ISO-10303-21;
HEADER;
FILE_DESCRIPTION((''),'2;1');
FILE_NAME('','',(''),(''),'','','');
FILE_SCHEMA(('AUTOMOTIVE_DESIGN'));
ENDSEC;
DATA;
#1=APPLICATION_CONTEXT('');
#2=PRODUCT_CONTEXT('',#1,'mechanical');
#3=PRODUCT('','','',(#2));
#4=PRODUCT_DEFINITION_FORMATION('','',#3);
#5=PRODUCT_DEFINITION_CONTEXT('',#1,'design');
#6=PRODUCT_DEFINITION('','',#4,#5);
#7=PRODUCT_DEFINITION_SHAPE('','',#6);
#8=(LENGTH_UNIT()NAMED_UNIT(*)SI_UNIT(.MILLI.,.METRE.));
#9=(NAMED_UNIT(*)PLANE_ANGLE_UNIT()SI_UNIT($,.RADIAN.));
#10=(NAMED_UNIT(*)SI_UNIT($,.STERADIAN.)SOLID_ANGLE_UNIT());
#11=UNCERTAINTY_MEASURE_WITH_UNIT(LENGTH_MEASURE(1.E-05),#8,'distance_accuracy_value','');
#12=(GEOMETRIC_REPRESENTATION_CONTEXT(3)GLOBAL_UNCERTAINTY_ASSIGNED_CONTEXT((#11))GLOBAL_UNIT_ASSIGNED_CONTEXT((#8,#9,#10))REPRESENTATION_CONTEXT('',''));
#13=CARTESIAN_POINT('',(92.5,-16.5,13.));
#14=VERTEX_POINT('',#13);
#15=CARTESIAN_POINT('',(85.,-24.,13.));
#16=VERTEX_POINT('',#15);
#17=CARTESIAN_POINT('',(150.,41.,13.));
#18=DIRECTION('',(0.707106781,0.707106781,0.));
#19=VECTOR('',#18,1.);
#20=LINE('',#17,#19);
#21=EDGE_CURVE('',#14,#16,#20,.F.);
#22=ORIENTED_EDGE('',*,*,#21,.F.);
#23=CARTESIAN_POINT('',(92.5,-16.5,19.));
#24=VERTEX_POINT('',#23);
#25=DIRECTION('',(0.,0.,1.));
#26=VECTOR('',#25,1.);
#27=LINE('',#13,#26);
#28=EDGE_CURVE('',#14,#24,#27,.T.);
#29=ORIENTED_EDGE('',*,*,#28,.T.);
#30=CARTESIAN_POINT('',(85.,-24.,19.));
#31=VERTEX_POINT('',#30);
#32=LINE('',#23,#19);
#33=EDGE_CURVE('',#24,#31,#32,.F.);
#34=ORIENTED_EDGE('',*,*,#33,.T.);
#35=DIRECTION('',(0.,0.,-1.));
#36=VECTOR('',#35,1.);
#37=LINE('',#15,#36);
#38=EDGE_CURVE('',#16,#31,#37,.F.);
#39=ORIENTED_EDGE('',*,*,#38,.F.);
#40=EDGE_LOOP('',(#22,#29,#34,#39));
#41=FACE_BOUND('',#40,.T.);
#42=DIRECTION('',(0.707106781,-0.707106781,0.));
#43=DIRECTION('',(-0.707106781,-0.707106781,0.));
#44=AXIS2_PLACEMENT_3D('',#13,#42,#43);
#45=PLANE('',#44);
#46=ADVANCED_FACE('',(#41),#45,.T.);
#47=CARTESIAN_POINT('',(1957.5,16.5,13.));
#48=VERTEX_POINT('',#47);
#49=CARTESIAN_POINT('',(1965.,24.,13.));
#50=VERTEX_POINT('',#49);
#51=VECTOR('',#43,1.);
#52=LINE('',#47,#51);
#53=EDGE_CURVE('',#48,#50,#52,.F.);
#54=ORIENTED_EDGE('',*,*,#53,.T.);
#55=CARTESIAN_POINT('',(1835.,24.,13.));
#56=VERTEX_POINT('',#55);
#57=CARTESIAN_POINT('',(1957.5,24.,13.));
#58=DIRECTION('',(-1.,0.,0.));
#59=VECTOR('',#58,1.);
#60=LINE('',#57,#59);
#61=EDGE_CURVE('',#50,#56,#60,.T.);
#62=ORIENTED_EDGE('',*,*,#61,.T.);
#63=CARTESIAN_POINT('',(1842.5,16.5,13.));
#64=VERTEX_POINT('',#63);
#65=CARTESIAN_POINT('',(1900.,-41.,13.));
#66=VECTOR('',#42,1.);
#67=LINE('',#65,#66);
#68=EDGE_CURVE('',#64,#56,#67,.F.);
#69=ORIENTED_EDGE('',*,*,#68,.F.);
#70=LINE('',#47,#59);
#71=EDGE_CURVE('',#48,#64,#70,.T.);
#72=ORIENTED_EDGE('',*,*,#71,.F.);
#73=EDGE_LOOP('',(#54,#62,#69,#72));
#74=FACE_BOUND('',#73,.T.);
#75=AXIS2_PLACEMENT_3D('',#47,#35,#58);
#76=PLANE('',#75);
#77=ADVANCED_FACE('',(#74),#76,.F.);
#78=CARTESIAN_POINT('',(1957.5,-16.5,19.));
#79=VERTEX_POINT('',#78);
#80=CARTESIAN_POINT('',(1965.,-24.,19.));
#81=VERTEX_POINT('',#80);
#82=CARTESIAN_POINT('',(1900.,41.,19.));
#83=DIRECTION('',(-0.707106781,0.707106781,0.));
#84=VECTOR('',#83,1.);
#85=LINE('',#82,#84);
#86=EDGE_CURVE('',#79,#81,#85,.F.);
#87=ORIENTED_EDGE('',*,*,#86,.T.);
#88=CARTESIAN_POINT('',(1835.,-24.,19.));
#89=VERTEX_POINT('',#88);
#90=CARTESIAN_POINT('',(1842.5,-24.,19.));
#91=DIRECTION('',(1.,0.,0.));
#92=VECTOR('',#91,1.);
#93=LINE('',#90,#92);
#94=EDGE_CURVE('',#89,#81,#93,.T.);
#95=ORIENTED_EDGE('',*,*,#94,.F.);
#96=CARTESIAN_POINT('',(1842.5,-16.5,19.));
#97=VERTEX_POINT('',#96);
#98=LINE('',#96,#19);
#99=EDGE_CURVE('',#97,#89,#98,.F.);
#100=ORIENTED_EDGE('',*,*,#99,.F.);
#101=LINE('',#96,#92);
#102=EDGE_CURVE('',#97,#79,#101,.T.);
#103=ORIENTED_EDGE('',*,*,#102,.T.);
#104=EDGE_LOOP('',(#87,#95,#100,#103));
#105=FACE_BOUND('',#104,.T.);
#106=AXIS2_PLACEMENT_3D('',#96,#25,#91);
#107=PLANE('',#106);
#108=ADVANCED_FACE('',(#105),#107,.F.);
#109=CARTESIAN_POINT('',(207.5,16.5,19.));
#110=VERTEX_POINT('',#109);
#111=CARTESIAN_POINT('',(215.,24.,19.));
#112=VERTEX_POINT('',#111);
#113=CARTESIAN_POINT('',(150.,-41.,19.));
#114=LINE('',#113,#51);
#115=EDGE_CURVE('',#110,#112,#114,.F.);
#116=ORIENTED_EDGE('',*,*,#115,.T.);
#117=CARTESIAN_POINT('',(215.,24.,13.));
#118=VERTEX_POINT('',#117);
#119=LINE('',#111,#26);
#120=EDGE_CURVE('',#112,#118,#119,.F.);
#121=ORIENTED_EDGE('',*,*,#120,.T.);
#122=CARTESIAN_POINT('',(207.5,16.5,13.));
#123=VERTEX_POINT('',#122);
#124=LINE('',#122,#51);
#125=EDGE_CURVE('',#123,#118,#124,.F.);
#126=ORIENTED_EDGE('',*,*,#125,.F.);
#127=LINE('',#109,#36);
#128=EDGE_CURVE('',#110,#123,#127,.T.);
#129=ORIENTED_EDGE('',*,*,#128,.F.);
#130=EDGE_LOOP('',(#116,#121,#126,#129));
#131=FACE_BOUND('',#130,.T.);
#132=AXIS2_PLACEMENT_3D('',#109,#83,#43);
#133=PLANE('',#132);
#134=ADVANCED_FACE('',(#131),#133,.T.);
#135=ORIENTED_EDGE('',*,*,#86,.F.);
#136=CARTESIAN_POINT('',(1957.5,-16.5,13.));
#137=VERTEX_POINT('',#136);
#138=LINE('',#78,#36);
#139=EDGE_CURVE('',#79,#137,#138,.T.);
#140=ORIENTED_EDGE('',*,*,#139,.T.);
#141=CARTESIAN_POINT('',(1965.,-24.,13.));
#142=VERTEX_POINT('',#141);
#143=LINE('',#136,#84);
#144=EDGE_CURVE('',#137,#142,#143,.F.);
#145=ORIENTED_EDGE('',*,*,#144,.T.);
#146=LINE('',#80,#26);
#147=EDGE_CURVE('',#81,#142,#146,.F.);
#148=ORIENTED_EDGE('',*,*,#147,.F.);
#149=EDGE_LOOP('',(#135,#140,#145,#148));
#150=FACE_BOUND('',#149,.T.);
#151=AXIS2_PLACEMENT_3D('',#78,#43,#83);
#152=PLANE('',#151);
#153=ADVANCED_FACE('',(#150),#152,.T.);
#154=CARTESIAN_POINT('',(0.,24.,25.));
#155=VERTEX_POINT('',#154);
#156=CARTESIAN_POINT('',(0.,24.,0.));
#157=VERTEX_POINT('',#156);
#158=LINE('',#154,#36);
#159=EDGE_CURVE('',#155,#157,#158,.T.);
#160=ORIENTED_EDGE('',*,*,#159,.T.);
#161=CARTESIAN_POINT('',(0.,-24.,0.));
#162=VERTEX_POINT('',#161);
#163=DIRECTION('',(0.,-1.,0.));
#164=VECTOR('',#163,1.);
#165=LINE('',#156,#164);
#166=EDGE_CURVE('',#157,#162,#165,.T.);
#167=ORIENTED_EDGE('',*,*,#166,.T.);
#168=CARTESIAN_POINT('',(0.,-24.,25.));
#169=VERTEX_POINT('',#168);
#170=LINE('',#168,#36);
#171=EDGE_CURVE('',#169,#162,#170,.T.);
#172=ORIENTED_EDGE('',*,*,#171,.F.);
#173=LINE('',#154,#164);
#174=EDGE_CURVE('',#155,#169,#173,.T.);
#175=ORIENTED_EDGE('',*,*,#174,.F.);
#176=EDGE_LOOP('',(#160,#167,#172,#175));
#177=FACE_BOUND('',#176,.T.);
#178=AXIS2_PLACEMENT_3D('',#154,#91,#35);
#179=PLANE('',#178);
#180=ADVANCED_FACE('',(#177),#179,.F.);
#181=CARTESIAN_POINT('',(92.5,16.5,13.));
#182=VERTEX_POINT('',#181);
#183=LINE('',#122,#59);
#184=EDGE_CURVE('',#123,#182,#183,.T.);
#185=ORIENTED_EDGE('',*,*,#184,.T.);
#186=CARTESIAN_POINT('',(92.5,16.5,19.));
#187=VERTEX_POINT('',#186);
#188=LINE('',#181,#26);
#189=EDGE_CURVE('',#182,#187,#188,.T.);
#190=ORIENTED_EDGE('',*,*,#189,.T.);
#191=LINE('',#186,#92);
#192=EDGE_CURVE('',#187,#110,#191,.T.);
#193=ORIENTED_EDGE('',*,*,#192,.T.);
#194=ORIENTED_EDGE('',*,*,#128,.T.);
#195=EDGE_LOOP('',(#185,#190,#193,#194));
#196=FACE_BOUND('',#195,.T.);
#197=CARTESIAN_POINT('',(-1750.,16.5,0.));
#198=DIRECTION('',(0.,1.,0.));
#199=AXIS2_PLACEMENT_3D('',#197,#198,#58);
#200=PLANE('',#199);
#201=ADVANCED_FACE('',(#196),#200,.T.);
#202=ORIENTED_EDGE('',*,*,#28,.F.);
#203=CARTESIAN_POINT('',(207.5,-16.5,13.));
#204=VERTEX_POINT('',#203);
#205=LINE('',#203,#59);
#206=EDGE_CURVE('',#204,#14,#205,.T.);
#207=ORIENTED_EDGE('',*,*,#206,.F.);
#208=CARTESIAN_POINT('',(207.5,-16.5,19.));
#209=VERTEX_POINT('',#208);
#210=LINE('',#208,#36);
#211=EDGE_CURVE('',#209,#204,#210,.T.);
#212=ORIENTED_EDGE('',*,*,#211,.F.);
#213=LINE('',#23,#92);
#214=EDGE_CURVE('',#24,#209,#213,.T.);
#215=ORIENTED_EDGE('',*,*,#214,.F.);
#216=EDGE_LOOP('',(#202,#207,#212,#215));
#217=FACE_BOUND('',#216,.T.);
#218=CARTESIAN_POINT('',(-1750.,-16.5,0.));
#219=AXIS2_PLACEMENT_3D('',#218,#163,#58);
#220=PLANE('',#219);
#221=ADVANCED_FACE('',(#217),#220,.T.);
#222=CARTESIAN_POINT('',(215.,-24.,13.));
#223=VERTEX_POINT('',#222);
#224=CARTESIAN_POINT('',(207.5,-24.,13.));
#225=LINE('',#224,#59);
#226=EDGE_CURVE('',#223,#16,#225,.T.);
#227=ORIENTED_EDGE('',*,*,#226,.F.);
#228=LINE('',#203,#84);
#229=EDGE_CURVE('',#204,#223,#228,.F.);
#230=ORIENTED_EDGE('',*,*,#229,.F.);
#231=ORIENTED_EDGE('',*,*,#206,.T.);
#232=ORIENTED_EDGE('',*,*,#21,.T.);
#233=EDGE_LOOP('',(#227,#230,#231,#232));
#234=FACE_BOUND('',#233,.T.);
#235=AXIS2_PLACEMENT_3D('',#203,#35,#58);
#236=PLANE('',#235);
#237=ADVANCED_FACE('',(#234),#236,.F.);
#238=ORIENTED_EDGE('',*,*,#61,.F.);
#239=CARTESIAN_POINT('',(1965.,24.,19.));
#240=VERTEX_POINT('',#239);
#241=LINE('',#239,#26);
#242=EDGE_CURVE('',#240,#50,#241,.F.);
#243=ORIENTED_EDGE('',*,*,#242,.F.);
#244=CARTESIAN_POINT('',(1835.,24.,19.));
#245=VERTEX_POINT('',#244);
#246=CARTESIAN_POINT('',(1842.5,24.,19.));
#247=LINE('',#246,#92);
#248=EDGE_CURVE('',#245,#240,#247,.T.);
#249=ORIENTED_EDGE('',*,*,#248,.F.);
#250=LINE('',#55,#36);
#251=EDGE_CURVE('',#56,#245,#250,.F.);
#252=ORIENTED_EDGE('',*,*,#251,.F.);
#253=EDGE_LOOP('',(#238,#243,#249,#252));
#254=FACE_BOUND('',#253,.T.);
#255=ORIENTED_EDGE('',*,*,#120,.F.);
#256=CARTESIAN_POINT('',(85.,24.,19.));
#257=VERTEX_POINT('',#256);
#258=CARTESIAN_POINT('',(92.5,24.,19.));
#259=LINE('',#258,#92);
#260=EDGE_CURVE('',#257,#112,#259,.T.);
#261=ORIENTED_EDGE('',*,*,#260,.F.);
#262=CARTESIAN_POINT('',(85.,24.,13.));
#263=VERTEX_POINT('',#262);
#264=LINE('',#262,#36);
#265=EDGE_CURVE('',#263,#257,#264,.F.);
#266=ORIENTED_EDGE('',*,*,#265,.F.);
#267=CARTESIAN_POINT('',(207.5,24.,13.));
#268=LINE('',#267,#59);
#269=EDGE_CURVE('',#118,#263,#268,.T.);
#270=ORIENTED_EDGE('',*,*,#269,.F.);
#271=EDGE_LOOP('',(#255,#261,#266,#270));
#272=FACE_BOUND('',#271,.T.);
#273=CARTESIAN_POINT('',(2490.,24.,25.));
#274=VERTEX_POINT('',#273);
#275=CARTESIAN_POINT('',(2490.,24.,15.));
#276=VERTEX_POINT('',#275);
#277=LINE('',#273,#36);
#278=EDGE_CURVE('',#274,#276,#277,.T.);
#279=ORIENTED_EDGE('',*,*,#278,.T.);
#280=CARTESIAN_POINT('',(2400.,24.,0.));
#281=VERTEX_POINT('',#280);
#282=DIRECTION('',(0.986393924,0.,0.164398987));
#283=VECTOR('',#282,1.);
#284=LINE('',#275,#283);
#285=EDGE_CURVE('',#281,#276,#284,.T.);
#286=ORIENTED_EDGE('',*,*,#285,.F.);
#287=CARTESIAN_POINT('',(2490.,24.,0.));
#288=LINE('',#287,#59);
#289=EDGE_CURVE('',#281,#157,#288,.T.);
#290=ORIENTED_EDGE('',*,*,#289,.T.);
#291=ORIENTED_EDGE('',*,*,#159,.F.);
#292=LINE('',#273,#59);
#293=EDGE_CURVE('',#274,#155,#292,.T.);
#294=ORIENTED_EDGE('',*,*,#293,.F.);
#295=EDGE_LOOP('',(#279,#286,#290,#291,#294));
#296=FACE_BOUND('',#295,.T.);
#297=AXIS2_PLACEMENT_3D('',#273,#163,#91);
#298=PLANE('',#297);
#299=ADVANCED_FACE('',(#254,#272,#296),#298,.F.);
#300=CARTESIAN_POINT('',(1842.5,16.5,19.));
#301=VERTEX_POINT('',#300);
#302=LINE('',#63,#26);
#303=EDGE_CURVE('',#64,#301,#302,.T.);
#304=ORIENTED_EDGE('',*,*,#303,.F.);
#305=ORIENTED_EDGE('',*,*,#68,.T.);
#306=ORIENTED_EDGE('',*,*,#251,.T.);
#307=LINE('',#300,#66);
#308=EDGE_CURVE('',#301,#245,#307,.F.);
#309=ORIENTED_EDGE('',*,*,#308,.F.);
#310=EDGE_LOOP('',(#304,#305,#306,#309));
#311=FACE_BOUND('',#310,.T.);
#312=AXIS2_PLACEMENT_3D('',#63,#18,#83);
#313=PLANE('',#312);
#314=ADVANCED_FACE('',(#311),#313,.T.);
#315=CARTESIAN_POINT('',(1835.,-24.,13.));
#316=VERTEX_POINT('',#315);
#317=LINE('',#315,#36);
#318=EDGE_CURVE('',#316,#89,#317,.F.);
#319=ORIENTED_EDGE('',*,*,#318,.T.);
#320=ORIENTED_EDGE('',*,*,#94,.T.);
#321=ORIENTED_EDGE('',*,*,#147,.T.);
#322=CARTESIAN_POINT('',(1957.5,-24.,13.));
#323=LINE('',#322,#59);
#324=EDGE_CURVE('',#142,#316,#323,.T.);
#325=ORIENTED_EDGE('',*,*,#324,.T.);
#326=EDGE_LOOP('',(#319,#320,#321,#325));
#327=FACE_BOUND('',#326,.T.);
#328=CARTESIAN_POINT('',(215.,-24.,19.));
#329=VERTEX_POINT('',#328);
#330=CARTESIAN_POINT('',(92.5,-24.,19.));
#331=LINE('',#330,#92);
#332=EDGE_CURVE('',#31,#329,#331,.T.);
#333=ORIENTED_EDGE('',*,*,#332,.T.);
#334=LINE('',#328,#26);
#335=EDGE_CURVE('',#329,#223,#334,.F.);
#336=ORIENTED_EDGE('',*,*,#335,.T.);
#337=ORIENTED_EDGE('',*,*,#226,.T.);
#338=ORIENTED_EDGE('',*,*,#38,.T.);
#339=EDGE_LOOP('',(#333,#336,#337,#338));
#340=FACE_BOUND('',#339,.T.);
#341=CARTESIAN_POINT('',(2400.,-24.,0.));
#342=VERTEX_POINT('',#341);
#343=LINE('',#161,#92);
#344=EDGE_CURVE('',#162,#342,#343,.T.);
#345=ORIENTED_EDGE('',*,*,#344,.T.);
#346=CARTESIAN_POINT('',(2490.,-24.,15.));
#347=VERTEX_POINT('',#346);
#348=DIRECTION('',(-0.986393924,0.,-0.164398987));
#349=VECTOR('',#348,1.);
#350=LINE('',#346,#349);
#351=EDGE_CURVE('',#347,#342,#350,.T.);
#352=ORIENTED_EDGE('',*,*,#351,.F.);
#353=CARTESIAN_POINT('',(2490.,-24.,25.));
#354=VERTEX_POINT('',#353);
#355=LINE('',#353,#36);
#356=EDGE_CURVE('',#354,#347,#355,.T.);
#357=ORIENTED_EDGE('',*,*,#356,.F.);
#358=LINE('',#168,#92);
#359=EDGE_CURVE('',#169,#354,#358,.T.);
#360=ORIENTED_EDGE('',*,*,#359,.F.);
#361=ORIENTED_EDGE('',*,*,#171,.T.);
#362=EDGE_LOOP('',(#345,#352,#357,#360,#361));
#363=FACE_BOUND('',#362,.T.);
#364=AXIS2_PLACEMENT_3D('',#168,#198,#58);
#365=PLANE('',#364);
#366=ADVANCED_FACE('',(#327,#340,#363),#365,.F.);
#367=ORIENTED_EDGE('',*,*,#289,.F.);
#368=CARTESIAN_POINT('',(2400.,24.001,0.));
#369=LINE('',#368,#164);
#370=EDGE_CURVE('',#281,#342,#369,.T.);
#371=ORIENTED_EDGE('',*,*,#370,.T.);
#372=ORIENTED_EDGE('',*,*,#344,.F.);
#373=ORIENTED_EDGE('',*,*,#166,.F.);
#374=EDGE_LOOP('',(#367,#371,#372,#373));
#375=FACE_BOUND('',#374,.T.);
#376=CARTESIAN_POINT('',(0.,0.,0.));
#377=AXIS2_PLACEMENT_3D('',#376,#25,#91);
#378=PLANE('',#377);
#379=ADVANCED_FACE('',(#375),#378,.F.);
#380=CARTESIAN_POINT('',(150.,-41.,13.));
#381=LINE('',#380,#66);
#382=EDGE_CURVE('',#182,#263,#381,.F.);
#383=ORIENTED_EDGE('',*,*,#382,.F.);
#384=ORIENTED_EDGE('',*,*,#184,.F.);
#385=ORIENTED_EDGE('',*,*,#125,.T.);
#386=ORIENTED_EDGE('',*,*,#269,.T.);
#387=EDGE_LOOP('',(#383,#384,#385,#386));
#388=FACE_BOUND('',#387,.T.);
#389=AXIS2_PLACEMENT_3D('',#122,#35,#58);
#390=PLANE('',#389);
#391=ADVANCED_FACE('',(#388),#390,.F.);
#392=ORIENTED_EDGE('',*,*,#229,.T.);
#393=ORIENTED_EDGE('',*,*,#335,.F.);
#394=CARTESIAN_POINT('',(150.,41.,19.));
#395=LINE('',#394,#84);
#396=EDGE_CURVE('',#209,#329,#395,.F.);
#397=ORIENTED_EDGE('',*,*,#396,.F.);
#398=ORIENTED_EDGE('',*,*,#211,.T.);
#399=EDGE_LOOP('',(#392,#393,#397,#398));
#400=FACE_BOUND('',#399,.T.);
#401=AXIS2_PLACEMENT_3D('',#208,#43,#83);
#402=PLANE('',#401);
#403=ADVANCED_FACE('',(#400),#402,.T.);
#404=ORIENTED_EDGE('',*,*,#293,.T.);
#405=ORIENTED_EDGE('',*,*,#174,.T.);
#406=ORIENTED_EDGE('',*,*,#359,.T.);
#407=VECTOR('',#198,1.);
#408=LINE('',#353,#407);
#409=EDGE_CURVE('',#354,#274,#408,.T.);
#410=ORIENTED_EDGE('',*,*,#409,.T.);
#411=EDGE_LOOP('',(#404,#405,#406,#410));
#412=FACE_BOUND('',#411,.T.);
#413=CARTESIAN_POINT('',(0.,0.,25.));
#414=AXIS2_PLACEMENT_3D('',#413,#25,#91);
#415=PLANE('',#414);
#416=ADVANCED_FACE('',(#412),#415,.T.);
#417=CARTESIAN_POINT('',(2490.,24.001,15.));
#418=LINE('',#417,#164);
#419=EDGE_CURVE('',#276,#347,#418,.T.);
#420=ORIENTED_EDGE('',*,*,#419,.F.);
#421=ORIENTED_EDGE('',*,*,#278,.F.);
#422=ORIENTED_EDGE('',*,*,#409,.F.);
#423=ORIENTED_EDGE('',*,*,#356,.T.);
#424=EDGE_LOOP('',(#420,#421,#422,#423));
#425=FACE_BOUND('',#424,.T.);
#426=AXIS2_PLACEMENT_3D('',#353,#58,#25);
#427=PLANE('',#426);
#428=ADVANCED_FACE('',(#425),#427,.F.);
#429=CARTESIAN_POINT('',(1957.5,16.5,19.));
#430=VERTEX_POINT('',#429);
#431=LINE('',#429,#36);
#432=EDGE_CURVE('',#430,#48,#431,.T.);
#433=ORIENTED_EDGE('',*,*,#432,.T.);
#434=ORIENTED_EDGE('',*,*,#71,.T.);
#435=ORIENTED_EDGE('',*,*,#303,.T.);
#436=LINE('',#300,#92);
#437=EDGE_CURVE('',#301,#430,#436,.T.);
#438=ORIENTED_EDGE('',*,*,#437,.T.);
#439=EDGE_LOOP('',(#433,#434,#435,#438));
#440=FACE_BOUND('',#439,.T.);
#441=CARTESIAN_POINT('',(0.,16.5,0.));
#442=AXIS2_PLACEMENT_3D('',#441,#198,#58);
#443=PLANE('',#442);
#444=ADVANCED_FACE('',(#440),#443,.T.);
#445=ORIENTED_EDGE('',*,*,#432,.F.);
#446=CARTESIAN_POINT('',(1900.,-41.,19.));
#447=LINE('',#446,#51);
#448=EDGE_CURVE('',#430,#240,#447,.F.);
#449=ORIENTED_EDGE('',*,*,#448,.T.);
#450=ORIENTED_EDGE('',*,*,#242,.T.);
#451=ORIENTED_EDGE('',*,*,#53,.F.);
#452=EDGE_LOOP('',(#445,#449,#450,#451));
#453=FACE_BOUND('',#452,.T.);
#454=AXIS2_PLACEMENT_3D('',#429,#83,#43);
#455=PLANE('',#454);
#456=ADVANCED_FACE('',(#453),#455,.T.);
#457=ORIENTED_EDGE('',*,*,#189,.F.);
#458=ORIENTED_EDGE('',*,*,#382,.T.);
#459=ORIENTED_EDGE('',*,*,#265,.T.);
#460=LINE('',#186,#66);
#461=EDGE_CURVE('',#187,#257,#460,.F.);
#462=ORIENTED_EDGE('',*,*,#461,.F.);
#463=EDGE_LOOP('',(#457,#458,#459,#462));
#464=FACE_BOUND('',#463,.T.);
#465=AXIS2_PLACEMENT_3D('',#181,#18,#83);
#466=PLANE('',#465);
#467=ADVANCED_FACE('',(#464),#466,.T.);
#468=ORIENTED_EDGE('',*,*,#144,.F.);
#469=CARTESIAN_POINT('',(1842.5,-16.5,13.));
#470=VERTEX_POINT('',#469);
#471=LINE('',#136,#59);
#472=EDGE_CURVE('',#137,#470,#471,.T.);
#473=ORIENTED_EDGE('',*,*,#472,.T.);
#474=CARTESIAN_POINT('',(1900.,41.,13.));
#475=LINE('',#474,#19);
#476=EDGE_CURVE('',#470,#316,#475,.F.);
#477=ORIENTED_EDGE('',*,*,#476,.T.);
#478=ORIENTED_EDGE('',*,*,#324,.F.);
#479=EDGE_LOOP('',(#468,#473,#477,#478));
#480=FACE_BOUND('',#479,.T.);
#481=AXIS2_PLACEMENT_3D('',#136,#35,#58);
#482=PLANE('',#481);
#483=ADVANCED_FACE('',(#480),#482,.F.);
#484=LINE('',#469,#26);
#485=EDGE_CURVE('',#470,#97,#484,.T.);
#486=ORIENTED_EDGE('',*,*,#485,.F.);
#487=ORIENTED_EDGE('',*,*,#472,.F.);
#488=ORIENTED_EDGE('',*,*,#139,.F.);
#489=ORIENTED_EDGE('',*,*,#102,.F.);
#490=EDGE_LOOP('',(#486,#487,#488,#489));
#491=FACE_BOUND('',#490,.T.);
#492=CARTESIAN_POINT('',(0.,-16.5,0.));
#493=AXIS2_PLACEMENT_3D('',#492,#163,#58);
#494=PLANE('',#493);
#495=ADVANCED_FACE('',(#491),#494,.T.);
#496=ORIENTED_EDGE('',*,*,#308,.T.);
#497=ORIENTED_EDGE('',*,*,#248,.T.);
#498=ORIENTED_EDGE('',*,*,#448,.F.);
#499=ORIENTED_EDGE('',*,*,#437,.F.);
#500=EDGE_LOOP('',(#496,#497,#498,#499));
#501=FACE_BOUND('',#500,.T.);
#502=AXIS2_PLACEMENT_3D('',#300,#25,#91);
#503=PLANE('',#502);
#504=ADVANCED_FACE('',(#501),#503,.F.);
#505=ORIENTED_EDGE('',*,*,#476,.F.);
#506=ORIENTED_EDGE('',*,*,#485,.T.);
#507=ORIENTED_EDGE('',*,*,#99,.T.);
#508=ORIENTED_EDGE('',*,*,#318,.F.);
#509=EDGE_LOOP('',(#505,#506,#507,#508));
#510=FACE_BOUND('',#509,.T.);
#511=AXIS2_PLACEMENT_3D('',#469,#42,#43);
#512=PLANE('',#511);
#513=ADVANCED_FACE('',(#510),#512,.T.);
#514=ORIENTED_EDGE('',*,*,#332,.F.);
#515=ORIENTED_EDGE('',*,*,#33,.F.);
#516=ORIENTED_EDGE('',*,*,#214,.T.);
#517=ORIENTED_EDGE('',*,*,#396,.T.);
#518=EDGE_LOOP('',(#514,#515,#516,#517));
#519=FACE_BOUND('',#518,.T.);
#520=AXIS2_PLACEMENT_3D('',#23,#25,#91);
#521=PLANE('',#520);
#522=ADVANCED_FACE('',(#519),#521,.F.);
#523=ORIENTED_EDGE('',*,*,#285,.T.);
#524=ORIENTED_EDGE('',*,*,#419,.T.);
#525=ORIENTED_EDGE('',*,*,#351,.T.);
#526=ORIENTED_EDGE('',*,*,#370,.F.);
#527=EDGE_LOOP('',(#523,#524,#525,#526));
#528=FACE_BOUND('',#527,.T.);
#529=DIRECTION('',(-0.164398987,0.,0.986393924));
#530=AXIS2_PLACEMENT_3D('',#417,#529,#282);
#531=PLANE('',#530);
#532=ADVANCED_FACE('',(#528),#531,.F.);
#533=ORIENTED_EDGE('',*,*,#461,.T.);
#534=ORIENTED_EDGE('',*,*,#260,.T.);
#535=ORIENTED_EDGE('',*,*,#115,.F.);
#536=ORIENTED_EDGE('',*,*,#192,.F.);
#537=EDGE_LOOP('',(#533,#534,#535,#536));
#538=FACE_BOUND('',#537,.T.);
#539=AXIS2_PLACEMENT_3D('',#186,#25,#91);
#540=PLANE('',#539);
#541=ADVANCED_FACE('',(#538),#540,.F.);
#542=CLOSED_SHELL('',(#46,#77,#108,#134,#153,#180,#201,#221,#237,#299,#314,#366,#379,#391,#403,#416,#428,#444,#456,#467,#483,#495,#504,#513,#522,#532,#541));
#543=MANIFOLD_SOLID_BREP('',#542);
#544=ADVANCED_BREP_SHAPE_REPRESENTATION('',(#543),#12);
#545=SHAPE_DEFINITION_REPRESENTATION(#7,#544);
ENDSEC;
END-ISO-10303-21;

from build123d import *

# Parameters (mm, degrees)
SKETCH_1_W             = 2490
SKETCH_1_H             = 48
EXTRUDE_1_DEPTH        = 25
SKETCH_2_W             = 115
SKETCH_2_H             = 6
CUT_EXTRUDE_1_DEPTH    = 7.5
DRAFT_1_ANGLE          = 45
MIRROR_START           = 13
MIRROR_1_DEPTH         = 6
PATTERN_START          = 13
PATTERN_LINEAR_1_DEPTH = 6
CUT_EXTRUDE_2_REACH    = 2492.588


# Read off the part's stored shape, not the designer's step: 镜向1, 阵列(线性)1
with BuildPart() as part:
    # 草图1 → 凸台-拉伸1 (new body)
    with BuildSketch(Plane.XY):
        with Locations((1245, 0)):
            Rectangle(SKETCH_1_W, SKETCH_1_H)
    extrude(amount=EXTRUDE_1_DEPTH)

    # 草图2 → 切除-拉伸1 (cut)
    with BuildSketch(Plane(origin=(0, 24, 0), x_dir=(1, 0, 0), z_dir=(0, 1, 0))):
        with Locations((1900, -16)):
            Rectangle(SKETCH_2_W, SKETCH_2_H)
    extrude(amount=-CUT_EXTRUDE_1_DEPTH, mode=Mode.SUBTRACT)

    # 拔模1
    draft_1_faces = [part.faces().sort_by_distance(p)[0] for p in [
        (1957.5, 20.25, 16),
        (1842.5, 20.25, 16),
    ]]
    draft(draft_1_faces, Plane(origin=(0, 16.5, 0), x_dir=(1, 0, 0), z_dir=(0, 1, 0)), DRAFT_1_ANGLE)

    # 镜向1 outline → 镜向1 (cut)
    with BuildSketch(Plane.XY.offset(MIRROR_START)):
        Polygon((1957.5, -16.5), (1842.5, -16.5), (1835, -24), (1965, -24), align=None)
    extrude(amount=MIRROR_1_DEPTH, mode=Mode.SUBTRACT)

    # 阵列(线性)1 outline → 阵列(线性)1 (cut)
    with BuildSketch(Plane.XY.offset(PATTERN_START)):
        Polygon((215, -24), (207.5, -16.5), (92.5, -16.5), (85, -24), align=None)
        Polygon((207.5, 16.5), (215, 24), (85, 24), (92.5, 16.5), align=None)
    extrude(amount=PATTERN_LINEAR_1_DEPTH, mode=Mode.SUBTRACT)

    # 草图3 → 切除-拉伸2 (cut, up to next)
    with BuildSketch(Plane.XZ.offset(24), mode=Mode.PRIVATE) as cut_extrude_2_sk1:
        Polygon((2400, 0), (2490, 0), (2490, 15), align=None)
    cut_extrude_2_tool1 = extrude(cut_extrude_2_sk1.sketch, amount=-CUT_EXTRUDE_2_REACH, mode=Mode.PRIVATE) & part.part
    add(cut_extrude_2_tool1.solids().sort_by_distance((2460, -24, 5))[0], mode=Mode.SUBTRACT)


solid = part.part
